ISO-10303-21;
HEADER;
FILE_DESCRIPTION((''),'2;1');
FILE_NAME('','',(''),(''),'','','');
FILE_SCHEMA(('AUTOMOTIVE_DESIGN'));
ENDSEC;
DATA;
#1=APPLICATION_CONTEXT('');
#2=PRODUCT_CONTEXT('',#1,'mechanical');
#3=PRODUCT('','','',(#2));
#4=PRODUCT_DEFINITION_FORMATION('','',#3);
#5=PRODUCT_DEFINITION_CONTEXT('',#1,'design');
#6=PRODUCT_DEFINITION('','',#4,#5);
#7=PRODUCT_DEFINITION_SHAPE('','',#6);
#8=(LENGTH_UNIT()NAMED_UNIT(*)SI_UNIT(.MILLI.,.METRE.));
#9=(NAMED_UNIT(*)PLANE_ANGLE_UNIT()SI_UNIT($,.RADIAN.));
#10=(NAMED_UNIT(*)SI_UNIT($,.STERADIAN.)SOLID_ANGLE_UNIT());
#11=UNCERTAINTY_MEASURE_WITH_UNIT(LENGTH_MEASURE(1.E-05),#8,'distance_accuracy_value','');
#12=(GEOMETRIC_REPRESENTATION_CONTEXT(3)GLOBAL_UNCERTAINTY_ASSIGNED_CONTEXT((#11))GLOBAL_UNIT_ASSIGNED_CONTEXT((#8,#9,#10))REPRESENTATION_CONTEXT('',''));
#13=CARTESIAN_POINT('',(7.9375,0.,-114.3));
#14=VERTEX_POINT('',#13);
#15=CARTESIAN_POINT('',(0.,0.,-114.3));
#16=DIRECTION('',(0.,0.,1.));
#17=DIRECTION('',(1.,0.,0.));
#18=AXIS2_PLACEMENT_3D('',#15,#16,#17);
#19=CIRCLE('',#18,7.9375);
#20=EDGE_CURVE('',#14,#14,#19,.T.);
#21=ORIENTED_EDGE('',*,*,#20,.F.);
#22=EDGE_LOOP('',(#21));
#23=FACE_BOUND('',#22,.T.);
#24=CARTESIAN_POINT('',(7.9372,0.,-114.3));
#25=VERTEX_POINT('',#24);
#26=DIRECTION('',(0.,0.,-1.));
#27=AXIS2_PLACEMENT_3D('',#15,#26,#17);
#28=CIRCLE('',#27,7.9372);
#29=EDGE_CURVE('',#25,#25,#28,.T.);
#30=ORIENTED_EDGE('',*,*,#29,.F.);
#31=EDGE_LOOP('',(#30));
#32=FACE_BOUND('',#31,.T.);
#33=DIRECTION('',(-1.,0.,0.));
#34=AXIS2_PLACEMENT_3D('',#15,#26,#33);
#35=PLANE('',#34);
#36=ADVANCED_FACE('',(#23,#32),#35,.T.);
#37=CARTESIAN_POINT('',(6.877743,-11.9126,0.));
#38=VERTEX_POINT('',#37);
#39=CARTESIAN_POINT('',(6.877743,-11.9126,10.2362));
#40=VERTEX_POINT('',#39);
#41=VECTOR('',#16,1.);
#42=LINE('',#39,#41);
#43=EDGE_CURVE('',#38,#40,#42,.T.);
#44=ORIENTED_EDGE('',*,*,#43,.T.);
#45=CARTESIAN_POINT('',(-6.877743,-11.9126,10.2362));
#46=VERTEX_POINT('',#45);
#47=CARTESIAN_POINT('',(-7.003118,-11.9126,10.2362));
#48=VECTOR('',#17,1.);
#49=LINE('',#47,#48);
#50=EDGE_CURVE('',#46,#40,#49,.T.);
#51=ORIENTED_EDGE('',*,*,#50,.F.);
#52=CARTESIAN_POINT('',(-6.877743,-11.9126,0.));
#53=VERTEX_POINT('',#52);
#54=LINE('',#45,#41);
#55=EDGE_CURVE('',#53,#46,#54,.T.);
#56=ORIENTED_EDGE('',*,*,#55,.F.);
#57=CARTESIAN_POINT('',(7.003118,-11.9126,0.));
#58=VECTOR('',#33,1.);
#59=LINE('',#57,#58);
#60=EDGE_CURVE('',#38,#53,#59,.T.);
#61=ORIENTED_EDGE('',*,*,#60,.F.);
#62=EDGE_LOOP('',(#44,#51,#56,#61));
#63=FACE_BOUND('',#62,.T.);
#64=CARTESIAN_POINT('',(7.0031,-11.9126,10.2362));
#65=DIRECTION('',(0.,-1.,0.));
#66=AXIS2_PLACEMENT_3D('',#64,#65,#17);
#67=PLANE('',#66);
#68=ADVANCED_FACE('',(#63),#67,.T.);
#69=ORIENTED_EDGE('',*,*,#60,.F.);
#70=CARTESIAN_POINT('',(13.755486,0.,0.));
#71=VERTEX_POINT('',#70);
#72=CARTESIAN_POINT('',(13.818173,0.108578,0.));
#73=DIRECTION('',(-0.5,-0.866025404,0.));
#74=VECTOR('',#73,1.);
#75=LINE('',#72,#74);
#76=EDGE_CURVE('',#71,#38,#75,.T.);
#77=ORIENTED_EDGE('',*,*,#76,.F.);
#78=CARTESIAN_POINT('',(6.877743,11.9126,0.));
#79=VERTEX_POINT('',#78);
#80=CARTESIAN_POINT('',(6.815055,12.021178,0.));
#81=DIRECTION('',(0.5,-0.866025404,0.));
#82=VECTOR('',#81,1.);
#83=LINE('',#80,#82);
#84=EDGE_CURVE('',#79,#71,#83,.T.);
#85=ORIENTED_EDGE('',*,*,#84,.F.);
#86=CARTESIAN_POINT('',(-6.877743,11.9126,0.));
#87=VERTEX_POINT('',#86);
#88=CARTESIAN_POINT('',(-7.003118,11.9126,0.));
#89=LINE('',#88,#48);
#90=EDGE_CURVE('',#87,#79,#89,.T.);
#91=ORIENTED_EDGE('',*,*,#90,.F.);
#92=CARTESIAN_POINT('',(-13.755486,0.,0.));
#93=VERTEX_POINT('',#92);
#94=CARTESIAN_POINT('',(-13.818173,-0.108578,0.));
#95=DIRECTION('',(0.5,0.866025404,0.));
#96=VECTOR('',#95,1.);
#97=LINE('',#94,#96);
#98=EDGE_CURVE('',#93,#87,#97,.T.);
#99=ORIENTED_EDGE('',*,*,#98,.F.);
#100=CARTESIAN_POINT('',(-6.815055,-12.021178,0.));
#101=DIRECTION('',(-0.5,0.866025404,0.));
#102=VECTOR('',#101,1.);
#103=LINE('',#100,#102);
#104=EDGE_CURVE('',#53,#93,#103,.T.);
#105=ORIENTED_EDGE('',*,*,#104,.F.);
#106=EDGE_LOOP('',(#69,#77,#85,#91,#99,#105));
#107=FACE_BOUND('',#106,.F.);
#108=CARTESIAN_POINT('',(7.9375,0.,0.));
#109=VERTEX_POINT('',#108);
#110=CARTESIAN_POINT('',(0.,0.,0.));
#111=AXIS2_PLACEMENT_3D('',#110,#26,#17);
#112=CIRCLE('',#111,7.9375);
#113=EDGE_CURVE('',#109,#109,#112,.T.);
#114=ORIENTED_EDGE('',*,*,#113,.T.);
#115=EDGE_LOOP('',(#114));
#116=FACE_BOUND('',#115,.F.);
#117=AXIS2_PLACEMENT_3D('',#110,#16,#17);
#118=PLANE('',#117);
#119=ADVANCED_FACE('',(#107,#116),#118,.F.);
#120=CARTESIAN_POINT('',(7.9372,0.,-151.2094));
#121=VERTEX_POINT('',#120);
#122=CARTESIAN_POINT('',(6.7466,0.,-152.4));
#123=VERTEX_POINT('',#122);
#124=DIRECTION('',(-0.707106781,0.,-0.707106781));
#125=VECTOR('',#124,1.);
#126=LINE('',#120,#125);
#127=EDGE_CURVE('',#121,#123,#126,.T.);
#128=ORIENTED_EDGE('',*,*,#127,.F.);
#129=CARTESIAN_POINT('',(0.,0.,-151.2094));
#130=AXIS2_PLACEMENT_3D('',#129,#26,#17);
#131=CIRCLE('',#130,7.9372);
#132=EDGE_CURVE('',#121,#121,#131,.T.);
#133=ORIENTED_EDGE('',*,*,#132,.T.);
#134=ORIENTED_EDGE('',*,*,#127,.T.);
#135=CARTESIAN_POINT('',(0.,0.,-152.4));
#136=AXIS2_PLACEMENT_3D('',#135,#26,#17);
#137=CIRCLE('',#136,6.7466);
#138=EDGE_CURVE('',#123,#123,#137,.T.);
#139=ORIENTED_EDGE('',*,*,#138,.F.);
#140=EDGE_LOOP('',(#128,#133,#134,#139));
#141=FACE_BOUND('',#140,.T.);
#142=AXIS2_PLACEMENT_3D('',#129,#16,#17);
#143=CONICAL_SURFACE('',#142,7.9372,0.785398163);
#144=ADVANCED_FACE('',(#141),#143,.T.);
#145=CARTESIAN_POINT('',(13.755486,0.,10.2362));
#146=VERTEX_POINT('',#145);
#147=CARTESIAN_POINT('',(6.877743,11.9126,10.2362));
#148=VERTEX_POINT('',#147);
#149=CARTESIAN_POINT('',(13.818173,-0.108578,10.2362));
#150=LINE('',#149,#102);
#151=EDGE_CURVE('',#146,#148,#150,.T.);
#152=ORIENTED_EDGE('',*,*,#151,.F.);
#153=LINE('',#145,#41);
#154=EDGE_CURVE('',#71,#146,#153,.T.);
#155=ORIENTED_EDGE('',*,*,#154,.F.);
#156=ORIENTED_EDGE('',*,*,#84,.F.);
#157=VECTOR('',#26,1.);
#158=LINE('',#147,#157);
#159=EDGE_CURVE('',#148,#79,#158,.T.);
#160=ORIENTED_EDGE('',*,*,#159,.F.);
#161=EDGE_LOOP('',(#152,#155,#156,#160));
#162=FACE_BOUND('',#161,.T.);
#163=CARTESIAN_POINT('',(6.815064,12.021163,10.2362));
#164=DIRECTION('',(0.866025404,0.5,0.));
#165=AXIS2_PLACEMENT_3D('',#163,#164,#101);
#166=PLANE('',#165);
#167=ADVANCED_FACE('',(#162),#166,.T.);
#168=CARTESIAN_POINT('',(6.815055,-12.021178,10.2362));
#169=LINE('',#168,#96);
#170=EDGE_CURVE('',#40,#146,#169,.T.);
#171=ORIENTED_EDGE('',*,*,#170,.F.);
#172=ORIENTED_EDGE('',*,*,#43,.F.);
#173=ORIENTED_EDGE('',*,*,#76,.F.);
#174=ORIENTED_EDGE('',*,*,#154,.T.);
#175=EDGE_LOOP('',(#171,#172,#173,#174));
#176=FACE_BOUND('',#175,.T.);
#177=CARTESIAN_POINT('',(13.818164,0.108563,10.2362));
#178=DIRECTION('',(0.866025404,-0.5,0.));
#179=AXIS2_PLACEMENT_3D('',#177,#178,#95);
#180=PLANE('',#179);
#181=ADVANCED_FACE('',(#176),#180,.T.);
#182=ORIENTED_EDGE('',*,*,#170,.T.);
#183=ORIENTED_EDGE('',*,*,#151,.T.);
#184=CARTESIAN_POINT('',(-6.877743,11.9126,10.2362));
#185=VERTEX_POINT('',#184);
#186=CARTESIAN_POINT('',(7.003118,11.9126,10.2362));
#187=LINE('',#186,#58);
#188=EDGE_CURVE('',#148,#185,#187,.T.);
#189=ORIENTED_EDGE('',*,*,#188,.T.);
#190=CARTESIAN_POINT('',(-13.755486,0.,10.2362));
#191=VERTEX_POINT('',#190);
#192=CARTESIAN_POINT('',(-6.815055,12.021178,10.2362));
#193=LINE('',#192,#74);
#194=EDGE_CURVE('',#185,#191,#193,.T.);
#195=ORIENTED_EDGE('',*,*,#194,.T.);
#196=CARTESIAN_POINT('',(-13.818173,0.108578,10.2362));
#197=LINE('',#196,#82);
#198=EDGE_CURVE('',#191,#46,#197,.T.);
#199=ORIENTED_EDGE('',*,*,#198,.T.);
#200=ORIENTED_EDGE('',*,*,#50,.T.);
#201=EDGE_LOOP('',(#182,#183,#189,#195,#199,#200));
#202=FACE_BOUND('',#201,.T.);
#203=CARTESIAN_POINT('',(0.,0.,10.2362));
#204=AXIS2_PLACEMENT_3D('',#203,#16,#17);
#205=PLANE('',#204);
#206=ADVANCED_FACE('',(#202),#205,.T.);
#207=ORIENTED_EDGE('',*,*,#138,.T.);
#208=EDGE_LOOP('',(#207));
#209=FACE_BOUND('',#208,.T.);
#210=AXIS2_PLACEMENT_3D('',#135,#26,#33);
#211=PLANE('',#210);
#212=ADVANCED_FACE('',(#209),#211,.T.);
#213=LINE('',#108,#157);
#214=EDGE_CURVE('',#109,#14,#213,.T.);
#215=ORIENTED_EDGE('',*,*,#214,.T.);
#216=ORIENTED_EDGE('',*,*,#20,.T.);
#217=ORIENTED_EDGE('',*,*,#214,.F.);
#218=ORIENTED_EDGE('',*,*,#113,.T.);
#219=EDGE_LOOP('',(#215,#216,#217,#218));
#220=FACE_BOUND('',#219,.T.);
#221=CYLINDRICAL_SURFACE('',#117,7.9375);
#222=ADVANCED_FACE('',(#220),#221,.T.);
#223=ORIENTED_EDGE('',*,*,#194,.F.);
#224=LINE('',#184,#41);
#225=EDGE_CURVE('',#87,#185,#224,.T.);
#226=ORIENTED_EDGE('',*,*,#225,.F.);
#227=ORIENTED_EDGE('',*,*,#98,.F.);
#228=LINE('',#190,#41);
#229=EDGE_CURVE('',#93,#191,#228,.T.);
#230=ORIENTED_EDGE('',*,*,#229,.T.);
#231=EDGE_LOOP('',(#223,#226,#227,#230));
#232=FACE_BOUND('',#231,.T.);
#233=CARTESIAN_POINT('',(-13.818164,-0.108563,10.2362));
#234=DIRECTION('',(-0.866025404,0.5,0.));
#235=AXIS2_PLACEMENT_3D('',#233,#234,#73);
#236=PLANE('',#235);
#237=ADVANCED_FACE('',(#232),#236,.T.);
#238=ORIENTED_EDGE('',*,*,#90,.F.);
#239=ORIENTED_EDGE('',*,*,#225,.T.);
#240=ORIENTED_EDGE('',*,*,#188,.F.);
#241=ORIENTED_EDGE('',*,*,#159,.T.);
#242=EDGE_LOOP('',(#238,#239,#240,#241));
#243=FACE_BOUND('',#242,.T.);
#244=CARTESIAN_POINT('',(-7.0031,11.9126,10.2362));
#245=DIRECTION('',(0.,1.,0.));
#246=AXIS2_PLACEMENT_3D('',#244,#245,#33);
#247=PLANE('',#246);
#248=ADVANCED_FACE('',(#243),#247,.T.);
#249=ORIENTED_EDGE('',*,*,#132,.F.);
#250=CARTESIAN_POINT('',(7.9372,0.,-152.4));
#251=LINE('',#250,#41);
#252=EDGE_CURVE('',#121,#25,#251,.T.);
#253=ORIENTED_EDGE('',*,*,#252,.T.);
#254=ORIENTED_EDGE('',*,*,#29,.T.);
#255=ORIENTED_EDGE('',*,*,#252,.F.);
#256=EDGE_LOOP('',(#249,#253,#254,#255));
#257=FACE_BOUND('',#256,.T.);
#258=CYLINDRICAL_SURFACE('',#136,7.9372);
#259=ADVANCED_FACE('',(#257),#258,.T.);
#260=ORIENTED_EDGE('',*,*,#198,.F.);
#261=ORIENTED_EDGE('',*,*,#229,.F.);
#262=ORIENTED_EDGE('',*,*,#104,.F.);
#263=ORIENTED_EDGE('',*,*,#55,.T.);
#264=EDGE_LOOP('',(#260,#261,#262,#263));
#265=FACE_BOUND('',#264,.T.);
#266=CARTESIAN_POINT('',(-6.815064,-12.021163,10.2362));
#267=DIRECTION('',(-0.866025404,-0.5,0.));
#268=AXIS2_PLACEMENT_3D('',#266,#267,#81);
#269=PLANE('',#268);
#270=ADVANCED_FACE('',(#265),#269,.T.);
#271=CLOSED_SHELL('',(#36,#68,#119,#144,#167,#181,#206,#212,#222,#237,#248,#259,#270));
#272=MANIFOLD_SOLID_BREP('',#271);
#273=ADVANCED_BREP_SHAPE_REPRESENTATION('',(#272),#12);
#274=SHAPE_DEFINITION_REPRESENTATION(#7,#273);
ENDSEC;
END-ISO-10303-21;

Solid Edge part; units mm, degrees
sketch "Sketch1" plane through (0, 0, 0) normal (0, 0, 1) x (1, 0, 0)
  circle A0 centre (0, 0) radius 13.8186
  dimension "D1" = 27.6372
extrude "Protrusion1" add sketch "Sketch1" along normal blind 10.2362
sketch "Sketch2" plane through (0, 0, 0) normal (0, 0, -1) x (1, 0, 0)
  circle A0 centre (0, 0) radius 7.9375
extrude "Protrusion2" add sketch "Sketch2" along normal blind 152.4
sketch "Sketch3" plane through (0, 0, -152.4) normal (0, 0, -1) x (1, 0, 0)
  circle A0 centre (0, 0) radius 7.9372
extrude "Cutout1" cut sketch "Sketch3" against normal blind 38.1 flip side to cut
chamfer "Chamfer_1" distance 1.1906 angle 45 1 edges at (-7.9372, 0, -152.4)
sketch "Sketch4" plane through (0, 0, 10.2362) normal (0, 0, 1) x (1, 0, 0)
  line L0 (-7.0031, 11.9126) -> (7.0031, 11.9126)
  dimension "D1" = 23.8252
extrude "Cutout2" cut sketch "Sketch4" against normal up to next material side at (0, 11.9626, 10.2362)
pattern_circular "Pattern1" count 6 over 360 about axis through (0, 0, 10.2362) along (0, 0, 1) of "Cutout2"
properties part number "201072"
